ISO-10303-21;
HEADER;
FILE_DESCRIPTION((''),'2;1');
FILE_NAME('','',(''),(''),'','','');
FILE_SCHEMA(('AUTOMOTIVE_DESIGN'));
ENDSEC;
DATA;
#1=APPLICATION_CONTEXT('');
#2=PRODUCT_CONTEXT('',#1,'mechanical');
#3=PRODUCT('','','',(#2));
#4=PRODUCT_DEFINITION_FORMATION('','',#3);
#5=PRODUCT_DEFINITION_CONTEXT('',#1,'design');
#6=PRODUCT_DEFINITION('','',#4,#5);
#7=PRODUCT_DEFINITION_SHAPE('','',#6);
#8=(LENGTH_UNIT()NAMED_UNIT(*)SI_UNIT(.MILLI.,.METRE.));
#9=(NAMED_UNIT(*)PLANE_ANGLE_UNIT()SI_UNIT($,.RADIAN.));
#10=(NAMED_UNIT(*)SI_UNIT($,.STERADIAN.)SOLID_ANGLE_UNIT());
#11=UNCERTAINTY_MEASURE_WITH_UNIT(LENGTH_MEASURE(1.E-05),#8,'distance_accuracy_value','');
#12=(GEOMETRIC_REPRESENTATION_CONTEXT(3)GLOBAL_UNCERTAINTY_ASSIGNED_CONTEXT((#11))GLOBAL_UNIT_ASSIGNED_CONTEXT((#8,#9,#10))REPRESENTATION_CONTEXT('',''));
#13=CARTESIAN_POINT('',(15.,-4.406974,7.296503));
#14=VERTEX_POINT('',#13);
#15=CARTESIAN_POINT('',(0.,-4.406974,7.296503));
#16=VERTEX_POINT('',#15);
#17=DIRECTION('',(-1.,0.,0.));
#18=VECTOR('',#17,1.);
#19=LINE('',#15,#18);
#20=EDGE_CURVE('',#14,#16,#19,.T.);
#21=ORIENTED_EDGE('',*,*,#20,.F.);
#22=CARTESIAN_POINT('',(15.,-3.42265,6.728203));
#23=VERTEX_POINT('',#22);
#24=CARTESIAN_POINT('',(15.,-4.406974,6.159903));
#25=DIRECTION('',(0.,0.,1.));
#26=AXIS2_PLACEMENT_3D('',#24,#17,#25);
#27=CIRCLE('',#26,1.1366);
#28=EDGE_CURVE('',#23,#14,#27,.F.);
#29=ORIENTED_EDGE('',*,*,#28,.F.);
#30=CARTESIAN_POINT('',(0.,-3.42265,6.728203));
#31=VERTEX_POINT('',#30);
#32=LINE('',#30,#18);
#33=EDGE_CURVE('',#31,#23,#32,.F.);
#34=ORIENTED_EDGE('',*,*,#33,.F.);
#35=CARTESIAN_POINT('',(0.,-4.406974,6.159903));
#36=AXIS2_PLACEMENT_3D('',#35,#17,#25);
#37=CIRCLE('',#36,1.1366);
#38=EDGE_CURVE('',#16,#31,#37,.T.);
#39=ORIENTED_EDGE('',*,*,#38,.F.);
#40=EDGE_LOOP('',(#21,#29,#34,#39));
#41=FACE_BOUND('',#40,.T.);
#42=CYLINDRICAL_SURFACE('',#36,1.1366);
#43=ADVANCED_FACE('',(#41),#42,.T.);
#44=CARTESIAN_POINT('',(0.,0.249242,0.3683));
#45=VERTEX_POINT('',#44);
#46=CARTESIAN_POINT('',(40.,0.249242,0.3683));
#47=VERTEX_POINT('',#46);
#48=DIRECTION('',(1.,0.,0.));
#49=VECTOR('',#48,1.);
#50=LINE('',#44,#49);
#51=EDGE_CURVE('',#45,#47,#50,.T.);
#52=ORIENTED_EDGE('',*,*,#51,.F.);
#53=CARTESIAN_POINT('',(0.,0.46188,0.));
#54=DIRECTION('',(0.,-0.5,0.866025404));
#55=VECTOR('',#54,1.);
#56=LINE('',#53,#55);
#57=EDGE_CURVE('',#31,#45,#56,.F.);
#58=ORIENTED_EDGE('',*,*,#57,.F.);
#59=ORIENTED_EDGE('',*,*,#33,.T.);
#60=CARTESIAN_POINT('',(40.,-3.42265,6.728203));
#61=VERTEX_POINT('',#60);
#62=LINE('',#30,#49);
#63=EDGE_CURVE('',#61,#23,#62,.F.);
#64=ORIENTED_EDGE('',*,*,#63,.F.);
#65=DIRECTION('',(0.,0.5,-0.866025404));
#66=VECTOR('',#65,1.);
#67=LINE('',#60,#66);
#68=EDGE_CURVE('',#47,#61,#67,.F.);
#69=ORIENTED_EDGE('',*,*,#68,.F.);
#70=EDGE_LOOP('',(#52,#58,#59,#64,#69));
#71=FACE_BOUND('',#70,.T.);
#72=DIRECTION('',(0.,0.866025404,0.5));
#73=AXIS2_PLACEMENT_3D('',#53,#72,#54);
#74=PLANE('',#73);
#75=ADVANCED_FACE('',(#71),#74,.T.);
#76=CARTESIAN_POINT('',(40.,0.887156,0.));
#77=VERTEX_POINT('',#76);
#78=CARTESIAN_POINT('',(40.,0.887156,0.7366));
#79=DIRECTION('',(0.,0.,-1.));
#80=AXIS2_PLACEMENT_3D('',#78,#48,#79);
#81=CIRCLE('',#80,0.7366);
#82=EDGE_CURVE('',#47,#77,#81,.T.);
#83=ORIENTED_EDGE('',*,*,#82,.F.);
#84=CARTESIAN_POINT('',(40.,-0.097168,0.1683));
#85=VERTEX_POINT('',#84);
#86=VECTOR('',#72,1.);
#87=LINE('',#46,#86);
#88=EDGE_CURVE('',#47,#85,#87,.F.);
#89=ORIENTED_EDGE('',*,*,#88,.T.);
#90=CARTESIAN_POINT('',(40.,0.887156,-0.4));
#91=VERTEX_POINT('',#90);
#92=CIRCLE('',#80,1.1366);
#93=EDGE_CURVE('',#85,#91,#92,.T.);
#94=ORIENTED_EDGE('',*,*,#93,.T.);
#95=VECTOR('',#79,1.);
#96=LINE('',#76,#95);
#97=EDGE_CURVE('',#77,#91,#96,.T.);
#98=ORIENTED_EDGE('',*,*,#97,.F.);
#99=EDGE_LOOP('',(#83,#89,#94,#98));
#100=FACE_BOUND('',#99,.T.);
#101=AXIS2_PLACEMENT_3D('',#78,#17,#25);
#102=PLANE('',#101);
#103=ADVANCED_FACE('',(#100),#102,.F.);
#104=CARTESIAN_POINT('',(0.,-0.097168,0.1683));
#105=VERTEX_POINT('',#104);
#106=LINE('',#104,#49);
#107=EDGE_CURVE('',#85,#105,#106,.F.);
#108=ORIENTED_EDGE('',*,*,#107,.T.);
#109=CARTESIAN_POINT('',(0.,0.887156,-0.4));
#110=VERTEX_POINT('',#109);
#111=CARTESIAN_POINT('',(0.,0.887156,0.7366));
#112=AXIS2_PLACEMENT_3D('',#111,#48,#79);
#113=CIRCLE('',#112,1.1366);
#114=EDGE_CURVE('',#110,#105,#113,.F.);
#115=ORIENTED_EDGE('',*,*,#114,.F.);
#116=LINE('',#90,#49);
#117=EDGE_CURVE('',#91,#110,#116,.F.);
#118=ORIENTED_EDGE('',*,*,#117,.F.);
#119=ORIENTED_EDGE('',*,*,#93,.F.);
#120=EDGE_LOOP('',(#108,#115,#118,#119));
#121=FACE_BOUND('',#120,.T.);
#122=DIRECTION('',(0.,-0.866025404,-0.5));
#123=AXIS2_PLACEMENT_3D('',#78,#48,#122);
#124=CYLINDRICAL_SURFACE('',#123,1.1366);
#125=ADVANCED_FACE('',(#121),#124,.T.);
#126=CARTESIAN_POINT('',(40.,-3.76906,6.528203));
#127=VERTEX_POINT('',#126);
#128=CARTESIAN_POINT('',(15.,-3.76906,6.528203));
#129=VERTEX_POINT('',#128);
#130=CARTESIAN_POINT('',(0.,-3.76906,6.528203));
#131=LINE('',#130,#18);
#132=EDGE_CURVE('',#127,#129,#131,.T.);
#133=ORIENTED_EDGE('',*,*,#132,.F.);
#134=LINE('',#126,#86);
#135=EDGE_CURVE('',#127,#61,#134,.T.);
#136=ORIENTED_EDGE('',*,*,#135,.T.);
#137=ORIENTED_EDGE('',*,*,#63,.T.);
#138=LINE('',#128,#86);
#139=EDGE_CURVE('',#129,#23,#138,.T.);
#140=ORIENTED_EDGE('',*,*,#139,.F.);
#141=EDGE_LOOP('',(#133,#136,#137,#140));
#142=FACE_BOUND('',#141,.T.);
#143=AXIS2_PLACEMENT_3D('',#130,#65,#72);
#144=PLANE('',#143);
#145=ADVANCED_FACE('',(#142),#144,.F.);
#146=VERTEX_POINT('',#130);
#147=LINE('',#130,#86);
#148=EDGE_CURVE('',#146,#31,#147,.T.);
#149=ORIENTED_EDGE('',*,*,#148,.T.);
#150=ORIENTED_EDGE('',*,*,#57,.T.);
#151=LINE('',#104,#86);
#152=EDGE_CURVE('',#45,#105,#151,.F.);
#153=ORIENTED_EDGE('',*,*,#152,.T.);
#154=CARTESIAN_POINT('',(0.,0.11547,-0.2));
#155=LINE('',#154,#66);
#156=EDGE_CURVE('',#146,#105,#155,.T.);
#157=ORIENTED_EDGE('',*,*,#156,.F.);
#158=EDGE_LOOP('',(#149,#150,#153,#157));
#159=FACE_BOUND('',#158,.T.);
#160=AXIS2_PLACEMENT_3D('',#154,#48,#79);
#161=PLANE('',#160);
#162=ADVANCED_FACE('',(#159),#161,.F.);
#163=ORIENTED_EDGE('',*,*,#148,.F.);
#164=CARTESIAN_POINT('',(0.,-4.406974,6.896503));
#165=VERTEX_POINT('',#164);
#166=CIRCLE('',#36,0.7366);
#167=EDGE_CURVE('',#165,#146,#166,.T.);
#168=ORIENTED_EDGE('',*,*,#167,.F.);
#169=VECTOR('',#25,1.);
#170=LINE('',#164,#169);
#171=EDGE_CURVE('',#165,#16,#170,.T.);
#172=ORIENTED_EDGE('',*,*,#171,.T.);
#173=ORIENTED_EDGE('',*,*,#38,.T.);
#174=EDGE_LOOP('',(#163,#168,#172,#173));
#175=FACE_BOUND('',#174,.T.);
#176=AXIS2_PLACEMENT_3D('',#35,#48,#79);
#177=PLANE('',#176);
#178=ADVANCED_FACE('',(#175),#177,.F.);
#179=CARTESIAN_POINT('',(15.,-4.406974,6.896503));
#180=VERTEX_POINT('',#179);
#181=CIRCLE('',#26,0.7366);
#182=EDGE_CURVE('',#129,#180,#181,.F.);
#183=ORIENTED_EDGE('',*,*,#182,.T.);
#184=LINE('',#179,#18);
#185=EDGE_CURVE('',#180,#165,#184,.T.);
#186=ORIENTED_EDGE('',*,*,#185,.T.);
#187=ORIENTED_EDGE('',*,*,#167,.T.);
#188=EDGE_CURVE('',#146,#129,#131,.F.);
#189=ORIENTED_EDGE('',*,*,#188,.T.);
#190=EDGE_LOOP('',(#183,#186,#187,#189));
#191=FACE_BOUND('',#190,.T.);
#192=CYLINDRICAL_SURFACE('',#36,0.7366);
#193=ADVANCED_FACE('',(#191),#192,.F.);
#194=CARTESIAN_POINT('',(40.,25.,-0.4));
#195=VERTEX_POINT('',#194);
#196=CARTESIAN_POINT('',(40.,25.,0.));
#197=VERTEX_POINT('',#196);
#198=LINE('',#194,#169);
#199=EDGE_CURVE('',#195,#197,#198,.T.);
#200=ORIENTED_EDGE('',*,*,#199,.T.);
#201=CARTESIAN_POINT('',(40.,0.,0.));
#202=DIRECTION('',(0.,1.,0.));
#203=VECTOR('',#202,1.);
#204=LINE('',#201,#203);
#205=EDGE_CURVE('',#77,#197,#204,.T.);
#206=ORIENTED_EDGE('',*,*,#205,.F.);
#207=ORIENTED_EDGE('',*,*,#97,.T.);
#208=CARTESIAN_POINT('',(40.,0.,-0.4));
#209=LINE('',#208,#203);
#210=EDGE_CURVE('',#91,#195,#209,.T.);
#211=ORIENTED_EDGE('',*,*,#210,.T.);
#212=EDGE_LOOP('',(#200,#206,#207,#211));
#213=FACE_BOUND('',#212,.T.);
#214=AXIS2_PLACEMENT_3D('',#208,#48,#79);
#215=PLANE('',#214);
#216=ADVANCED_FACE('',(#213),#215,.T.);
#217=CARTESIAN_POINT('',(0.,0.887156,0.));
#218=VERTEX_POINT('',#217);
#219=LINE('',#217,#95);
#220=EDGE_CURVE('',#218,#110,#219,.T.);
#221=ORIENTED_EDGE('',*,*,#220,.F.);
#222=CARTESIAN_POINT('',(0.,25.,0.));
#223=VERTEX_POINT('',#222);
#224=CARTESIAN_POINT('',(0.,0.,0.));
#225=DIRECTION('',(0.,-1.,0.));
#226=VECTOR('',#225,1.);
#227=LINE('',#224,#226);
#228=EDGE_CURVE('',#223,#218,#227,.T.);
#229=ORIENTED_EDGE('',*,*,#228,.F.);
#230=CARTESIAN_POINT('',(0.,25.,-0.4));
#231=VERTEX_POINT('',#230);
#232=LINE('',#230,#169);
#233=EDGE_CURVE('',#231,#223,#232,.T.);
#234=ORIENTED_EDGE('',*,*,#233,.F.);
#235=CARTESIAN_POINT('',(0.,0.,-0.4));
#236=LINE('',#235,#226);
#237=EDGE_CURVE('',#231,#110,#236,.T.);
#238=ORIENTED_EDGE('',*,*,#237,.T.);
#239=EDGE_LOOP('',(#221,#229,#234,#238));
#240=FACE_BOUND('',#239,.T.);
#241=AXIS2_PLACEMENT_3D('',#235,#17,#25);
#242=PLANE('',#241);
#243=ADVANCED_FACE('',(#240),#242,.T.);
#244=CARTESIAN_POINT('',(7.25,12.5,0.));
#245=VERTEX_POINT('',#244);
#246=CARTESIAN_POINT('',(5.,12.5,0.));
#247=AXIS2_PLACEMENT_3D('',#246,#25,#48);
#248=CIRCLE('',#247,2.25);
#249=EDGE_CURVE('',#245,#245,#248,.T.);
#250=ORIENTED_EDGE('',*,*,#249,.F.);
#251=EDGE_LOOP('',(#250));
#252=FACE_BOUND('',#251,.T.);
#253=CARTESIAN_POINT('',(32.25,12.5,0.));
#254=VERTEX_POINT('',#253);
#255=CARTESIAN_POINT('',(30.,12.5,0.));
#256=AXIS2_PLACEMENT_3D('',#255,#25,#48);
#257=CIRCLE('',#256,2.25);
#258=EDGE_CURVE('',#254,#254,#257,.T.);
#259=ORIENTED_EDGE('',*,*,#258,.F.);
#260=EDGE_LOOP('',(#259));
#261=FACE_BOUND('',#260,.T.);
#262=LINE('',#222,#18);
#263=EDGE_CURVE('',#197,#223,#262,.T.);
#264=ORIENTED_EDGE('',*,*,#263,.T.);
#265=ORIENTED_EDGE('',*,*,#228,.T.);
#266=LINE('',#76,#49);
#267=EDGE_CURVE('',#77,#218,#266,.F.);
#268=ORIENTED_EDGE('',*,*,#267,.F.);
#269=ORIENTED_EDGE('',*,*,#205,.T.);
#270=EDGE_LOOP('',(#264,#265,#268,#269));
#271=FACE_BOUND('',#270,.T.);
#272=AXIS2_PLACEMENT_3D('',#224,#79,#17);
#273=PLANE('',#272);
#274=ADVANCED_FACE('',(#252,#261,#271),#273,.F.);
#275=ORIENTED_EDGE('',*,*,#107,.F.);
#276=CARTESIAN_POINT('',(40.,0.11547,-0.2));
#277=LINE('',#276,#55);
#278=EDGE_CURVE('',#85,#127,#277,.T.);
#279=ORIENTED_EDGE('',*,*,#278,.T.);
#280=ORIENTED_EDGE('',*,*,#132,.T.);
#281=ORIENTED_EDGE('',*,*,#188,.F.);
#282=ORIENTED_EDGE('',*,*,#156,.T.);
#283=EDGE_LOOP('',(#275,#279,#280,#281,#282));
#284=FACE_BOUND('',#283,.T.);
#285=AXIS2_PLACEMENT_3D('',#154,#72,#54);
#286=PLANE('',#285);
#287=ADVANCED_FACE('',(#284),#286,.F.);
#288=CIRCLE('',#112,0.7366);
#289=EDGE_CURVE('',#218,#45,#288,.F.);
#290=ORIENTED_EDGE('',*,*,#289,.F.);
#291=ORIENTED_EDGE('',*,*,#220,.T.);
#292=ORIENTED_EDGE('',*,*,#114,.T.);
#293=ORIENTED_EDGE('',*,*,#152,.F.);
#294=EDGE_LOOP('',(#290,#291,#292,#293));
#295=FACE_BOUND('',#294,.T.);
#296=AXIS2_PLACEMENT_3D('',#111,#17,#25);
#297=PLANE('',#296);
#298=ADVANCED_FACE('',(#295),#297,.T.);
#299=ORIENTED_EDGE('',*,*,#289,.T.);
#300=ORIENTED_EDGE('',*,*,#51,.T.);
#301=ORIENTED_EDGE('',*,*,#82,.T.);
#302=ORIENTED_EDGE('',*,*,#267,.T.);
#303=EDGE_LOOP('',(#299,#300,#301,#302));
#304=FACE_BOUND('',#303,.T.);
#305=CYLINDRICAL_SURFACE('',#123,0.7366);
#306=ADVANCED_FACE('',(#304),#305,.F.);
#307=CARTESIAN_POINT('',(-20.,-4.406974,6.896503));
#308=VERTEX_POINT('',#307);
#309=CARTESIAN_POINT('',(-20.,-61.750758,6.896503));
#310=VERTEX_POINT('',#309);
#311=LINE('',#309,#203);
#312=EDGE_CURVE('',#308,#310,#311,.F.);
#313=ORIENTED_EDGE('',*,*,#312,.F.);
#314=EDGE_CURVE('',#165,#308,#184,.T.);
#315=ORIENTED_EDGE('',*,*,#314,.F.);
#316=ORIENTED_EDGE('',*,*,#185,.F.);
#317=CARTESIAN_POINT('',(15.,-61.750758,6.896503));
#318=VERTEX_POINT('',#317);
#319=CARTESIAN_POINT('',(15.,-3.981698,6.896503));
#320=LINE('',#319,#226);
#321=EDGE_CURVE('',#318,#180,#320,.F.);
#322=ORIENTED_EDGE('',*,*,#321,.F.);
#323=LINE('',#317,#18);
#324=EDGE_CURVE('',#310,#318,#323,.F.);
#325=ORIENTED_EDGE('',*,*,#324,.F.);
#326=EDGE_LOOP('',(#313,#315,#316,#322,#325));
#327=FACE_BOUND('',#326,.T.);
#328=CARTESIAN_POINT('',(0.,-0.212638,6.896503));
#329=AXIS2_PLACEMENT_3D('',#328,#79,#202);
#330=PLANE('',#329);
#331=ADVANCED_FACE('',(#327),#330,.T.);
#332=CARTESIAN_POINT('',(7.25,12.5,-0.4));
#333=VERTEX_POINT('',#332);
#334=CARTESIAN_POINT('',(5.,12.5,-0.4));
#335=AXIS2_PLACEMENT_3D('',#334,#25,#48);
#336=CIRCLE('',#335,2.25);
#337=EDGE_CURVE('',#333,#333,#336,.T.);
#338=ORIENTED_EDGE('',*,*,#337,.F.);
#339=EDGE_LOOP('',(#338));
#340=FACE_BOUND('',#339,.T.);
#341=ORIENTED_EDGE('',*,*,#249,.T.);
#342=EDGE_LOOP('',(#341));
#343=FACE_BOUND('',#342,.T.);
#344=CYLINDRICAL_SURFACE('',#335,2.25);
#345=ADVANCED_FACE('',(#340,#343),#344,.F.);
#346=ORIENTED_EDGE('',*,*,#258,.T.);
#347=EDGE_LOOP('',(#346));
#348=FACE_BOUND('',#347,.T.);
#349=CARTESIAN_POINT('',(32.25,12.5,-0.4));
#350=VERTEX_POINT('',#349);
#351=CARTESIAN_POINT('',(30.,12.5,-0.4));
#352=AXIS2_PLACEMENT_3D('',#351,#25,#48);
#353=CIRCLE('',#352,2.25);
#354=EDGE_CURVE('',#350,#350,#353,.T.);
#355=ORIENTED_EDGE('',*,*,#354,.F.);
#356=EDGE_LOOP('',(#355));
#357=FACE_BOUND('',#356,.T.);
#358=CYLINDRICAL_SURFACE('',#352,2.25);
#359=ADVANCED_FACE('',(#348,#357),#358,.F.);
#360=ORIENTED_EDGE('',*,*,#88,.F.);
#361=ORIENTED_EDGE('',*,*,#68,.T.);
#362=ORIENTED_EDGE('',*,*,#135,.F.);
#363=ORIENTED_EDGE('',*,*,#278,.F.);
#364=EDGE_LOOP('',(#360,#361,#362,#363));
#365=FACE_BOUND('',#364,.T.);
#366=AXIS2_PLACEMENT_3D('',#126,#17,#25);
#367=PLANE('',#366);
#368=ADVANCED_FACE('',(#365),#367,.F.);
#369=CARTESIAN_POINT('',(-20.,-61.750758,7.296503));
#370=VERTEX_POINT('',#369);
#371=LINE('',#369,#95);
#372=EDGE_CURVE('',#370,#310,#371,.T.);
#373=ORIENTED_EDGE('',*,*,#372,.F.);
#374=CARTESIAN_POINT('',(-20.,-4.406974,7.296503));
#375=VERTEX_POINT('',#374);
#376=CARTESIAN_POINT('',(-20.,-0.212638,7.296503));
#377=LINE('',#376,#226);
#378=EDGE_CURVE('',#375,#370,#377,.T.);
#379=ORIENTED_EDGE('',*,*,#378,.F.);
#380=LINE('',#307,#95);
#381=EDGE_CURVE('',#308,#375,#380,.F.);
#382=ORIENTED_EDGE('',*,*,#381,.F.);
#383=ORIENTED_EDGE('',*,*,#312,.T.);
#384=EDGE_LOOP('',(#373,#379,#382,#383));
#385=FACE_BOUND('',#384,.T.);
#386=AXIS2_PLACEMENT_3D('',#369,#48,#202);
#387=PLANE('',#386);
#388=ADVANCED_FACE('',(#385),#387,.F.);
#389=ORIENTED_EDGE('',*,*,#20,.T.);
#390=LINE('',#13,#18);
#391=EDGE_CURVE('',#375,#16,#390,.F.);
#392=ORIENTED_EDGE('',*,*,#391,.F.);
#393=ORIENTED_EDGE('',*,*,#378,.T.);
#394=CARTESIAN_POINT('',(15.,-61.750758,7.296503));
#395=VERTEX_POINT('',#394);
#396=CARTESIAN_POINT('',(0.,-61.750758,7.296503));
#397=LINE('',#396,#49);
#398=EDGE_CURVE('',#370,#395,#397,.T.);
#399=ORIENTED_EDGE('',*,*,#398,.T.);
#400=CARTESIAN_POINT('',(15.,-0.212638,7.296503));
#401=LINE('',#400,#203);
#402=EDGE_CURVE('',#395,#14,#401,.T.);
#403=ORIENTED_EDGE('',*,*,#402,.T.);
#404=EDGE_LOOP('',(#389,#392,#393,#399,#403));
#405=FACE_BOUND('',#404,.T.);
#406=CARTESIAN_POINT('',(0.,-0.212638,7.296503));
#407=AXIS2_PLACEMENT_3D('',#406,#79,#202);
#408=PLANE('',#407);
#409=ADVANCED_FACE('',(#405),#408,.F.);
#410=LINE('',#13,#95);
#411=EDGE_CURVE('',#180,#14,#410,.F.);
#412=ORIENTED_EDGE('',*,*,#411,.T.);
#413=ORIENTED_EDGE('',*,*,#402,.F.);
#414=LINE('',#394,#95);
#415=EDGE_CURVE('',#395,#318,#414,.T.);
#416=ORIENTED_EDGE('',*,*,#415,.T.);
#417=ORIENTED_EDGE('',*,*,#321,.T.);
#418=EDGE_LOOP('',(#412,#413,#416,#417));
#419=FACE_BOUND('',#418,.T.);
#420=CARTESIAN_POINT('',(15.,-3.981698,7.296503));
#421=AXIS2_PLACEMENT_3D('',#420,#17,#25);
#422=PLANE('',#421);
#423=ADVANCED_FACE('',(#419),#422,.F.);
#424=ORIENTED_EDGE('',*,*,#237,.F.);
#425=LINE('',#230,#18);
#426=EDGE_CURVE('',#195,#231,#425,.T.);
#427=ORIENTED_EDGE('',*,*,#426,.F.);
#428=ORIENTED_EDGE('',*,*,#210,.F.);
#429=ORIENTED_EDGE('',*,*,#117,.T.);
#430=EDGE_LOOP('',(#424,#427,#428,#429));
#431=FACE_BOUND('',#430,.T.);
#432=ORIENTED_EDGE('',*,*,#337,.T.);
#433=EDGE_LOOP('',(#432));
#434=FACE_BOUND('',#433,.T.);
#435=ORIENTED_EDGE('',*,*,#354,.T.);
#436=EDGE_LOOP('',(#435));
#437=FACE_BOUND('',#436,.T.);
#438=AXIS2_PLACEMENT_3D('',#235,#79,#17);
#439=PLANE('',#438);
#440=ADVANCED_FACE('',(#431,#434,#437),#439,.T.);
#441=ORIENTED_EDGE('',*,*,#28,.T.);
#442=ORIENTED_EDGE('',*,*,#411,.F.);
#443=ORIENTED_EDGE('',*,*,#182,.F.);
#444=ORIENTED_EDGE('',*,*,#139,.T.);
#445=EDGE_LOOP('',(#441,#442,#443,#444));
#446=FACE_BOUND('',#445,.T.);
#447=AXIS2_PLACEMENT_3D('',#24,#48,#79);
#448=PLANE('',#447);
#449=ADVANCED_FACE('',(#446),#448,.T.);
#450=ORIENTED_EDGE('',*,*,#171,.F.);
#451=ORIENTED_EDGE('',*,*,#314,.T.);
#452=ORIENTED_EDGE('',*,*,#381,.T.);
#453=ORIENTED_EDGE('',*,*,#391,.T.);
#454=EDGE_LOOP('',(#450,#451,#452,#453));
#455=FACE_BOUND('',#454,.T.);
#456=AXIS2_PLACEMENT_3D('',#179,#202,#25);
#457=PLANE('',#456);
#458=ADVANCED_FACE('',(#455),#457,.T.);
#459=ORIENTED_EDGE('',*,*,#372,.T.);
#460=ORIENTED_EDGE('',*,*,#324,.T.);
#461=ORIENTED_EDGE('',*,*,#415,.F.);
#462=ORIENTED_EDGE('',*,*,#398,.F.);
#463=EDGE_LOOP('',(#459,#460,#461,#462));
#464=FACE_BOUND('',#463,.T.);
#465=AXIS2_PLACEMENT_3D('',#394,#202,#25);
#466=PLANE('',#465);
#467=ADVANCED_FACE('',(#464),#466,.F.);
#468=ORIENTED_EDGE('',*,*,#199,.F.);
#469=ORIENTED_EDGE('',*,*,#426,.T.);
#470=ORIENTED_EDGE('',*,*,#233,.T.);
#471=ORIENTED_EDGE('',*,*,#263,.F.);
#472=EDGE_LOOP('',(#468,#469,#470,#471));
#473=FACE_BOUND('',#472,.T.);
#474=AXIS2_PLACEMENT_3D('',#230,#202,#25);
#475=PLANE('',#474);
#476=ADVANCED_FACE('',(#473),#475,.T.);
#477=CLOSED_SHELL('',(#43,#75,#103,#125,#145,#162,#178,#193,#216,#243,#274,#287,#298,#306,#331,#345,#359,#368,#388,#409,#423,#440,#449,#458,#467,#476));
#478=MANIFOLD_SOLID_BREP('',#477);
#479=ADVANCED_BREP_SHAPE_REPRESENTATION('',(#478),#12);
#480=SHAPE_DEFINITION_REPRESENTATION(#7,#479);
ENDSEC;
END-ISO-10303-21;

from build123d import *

# Parameters (mm, degrees)
SKETCH2_W               = 40
SKETCH2_H               = 25
SKETCH2_R               = 2.25
BASE_FLANGE1_DEPTH      = 0.4
EDGE_FLANGE1_DEPTH      = 40
EDGE_FLANGE1_2_DEPTH    = 40
EDGE_FLANGE2_DEPTH      = 15
EDGE_FLANGE2_START      = 0.4
EDGE_FLANGE2_PROFILE_W  = 35
EDGE_FLANGE2_PROFILE_H  = 57.343783684
EDGE_FLANGE2_FLAT_DEPTH = 0.4


# Read off the part's stored shape, not the designer's step: Edge-Flange1
# Sheet-metal steps are written as plain solids
with BuildPart() as part:
    # Sketch2 → Base-Flange1 (new body)
    with BuildSketch(Plane.XY):
        with Locations((20, 12.5)):
            Rectangle(SKETCH2_W, SKETCH2_H)
        with Locations((5, 12.5)):
            Circle(SKETCH2_R, mode=Mode.SUBTRACT)
        with Locations((30, 12.5)):
            Circle(SKETCH2_R, mode=Mode.SUBTRACT)
    extrude(amount=-BASE_FLANGE1_DEPTH)

    # Edge-Flange1 outline → Edge-Flange1 (cut)
    with BuildSketch(Plane.YZ):
        with BuildLine():
            ThreePointArc((0.887156424, -0.4), (0.410375552, -0.295165264), (0.021546812, 0))
            Line((0.021546812, 0), (0, 0))
            Line((0, 0), (0, -0.4))
            Line((0, -0.4), (0.887156424, -0.4))
        make_face()
    extrude(amount=EDGE_FLANGE1_DEPTH, mode=Mode.SUBTRACT)

    # Edge-Flange1 2 outline → Edge-Flange1 2 (add)
    with BuildSketch(Plane.YZ):
        with BuildLine():
            Line((-3.769059892, 6.52820323), (-0.09716805, 0.1683))
            ThreePointArc((-0.09716805, 0.1683), (-0.041630555, 0.081455507), (0.021546812, 0))
            Line((0.021546812, 0), (0.887156424, 0))
            ThreePointArc((0.887156424, 0), (0.518856424, 0.098685688), (0.249242111, 0.3683))
            Line((0.249242111, 0.3683), (-3.422649731, 6.72820323))
            Line((-3.422649731, 6.72820323), (-3.769059892, 6.52820323))
        make_face()
    extrude(amount=EDGE_FLANGE1_2_DEPTH)

    # Edge-Flange2 bend section (across the edge) → Edge-Flange2 (add)
    with BuildSketch(Plane(origin=(15, -3.981697996, 6.89650323), x_dir=(0, 0, -1), z_dir=(-1, 0, 0))):
        with BuildLine():
            Line((-0.4, 0.425276208), (0, 0.425276208))
            ThreePointArc((0, 0.425276208), (0.098685688, 0.056976208), (0.3683, -0.212638104))
            Line((0.3683, -0.212638104), (0.1683, -0.559048266))
            ThreePointArc((0.1683, -0.559048266), (-0.247724474, -0.143023792), (-0.4, 0.425276208))
        make_face()
    extrude(amount=EDGE_FLANGE2_DEPTH)

    # Edge-Flange2 profile (on flange) → Edge-Flange2 flat (add)
    with BuildSketch(Plane(origin=(0, -3.981697996, 6.89650323), x_dir=(-1, 0, 0), z_dir=(0, 0, 1)).offset(EDGE_FLANGE2_START)):
        with Locations((2.5, 29.09716805)):
            Rectangle(EDGE_FLANGE2_PROFILE_W, EDGE_FLANGE2_PROFILE_H)
    extrude(amount=-EDGE_FLANGE2_FLAT_DEPTH)


solid = part.part
